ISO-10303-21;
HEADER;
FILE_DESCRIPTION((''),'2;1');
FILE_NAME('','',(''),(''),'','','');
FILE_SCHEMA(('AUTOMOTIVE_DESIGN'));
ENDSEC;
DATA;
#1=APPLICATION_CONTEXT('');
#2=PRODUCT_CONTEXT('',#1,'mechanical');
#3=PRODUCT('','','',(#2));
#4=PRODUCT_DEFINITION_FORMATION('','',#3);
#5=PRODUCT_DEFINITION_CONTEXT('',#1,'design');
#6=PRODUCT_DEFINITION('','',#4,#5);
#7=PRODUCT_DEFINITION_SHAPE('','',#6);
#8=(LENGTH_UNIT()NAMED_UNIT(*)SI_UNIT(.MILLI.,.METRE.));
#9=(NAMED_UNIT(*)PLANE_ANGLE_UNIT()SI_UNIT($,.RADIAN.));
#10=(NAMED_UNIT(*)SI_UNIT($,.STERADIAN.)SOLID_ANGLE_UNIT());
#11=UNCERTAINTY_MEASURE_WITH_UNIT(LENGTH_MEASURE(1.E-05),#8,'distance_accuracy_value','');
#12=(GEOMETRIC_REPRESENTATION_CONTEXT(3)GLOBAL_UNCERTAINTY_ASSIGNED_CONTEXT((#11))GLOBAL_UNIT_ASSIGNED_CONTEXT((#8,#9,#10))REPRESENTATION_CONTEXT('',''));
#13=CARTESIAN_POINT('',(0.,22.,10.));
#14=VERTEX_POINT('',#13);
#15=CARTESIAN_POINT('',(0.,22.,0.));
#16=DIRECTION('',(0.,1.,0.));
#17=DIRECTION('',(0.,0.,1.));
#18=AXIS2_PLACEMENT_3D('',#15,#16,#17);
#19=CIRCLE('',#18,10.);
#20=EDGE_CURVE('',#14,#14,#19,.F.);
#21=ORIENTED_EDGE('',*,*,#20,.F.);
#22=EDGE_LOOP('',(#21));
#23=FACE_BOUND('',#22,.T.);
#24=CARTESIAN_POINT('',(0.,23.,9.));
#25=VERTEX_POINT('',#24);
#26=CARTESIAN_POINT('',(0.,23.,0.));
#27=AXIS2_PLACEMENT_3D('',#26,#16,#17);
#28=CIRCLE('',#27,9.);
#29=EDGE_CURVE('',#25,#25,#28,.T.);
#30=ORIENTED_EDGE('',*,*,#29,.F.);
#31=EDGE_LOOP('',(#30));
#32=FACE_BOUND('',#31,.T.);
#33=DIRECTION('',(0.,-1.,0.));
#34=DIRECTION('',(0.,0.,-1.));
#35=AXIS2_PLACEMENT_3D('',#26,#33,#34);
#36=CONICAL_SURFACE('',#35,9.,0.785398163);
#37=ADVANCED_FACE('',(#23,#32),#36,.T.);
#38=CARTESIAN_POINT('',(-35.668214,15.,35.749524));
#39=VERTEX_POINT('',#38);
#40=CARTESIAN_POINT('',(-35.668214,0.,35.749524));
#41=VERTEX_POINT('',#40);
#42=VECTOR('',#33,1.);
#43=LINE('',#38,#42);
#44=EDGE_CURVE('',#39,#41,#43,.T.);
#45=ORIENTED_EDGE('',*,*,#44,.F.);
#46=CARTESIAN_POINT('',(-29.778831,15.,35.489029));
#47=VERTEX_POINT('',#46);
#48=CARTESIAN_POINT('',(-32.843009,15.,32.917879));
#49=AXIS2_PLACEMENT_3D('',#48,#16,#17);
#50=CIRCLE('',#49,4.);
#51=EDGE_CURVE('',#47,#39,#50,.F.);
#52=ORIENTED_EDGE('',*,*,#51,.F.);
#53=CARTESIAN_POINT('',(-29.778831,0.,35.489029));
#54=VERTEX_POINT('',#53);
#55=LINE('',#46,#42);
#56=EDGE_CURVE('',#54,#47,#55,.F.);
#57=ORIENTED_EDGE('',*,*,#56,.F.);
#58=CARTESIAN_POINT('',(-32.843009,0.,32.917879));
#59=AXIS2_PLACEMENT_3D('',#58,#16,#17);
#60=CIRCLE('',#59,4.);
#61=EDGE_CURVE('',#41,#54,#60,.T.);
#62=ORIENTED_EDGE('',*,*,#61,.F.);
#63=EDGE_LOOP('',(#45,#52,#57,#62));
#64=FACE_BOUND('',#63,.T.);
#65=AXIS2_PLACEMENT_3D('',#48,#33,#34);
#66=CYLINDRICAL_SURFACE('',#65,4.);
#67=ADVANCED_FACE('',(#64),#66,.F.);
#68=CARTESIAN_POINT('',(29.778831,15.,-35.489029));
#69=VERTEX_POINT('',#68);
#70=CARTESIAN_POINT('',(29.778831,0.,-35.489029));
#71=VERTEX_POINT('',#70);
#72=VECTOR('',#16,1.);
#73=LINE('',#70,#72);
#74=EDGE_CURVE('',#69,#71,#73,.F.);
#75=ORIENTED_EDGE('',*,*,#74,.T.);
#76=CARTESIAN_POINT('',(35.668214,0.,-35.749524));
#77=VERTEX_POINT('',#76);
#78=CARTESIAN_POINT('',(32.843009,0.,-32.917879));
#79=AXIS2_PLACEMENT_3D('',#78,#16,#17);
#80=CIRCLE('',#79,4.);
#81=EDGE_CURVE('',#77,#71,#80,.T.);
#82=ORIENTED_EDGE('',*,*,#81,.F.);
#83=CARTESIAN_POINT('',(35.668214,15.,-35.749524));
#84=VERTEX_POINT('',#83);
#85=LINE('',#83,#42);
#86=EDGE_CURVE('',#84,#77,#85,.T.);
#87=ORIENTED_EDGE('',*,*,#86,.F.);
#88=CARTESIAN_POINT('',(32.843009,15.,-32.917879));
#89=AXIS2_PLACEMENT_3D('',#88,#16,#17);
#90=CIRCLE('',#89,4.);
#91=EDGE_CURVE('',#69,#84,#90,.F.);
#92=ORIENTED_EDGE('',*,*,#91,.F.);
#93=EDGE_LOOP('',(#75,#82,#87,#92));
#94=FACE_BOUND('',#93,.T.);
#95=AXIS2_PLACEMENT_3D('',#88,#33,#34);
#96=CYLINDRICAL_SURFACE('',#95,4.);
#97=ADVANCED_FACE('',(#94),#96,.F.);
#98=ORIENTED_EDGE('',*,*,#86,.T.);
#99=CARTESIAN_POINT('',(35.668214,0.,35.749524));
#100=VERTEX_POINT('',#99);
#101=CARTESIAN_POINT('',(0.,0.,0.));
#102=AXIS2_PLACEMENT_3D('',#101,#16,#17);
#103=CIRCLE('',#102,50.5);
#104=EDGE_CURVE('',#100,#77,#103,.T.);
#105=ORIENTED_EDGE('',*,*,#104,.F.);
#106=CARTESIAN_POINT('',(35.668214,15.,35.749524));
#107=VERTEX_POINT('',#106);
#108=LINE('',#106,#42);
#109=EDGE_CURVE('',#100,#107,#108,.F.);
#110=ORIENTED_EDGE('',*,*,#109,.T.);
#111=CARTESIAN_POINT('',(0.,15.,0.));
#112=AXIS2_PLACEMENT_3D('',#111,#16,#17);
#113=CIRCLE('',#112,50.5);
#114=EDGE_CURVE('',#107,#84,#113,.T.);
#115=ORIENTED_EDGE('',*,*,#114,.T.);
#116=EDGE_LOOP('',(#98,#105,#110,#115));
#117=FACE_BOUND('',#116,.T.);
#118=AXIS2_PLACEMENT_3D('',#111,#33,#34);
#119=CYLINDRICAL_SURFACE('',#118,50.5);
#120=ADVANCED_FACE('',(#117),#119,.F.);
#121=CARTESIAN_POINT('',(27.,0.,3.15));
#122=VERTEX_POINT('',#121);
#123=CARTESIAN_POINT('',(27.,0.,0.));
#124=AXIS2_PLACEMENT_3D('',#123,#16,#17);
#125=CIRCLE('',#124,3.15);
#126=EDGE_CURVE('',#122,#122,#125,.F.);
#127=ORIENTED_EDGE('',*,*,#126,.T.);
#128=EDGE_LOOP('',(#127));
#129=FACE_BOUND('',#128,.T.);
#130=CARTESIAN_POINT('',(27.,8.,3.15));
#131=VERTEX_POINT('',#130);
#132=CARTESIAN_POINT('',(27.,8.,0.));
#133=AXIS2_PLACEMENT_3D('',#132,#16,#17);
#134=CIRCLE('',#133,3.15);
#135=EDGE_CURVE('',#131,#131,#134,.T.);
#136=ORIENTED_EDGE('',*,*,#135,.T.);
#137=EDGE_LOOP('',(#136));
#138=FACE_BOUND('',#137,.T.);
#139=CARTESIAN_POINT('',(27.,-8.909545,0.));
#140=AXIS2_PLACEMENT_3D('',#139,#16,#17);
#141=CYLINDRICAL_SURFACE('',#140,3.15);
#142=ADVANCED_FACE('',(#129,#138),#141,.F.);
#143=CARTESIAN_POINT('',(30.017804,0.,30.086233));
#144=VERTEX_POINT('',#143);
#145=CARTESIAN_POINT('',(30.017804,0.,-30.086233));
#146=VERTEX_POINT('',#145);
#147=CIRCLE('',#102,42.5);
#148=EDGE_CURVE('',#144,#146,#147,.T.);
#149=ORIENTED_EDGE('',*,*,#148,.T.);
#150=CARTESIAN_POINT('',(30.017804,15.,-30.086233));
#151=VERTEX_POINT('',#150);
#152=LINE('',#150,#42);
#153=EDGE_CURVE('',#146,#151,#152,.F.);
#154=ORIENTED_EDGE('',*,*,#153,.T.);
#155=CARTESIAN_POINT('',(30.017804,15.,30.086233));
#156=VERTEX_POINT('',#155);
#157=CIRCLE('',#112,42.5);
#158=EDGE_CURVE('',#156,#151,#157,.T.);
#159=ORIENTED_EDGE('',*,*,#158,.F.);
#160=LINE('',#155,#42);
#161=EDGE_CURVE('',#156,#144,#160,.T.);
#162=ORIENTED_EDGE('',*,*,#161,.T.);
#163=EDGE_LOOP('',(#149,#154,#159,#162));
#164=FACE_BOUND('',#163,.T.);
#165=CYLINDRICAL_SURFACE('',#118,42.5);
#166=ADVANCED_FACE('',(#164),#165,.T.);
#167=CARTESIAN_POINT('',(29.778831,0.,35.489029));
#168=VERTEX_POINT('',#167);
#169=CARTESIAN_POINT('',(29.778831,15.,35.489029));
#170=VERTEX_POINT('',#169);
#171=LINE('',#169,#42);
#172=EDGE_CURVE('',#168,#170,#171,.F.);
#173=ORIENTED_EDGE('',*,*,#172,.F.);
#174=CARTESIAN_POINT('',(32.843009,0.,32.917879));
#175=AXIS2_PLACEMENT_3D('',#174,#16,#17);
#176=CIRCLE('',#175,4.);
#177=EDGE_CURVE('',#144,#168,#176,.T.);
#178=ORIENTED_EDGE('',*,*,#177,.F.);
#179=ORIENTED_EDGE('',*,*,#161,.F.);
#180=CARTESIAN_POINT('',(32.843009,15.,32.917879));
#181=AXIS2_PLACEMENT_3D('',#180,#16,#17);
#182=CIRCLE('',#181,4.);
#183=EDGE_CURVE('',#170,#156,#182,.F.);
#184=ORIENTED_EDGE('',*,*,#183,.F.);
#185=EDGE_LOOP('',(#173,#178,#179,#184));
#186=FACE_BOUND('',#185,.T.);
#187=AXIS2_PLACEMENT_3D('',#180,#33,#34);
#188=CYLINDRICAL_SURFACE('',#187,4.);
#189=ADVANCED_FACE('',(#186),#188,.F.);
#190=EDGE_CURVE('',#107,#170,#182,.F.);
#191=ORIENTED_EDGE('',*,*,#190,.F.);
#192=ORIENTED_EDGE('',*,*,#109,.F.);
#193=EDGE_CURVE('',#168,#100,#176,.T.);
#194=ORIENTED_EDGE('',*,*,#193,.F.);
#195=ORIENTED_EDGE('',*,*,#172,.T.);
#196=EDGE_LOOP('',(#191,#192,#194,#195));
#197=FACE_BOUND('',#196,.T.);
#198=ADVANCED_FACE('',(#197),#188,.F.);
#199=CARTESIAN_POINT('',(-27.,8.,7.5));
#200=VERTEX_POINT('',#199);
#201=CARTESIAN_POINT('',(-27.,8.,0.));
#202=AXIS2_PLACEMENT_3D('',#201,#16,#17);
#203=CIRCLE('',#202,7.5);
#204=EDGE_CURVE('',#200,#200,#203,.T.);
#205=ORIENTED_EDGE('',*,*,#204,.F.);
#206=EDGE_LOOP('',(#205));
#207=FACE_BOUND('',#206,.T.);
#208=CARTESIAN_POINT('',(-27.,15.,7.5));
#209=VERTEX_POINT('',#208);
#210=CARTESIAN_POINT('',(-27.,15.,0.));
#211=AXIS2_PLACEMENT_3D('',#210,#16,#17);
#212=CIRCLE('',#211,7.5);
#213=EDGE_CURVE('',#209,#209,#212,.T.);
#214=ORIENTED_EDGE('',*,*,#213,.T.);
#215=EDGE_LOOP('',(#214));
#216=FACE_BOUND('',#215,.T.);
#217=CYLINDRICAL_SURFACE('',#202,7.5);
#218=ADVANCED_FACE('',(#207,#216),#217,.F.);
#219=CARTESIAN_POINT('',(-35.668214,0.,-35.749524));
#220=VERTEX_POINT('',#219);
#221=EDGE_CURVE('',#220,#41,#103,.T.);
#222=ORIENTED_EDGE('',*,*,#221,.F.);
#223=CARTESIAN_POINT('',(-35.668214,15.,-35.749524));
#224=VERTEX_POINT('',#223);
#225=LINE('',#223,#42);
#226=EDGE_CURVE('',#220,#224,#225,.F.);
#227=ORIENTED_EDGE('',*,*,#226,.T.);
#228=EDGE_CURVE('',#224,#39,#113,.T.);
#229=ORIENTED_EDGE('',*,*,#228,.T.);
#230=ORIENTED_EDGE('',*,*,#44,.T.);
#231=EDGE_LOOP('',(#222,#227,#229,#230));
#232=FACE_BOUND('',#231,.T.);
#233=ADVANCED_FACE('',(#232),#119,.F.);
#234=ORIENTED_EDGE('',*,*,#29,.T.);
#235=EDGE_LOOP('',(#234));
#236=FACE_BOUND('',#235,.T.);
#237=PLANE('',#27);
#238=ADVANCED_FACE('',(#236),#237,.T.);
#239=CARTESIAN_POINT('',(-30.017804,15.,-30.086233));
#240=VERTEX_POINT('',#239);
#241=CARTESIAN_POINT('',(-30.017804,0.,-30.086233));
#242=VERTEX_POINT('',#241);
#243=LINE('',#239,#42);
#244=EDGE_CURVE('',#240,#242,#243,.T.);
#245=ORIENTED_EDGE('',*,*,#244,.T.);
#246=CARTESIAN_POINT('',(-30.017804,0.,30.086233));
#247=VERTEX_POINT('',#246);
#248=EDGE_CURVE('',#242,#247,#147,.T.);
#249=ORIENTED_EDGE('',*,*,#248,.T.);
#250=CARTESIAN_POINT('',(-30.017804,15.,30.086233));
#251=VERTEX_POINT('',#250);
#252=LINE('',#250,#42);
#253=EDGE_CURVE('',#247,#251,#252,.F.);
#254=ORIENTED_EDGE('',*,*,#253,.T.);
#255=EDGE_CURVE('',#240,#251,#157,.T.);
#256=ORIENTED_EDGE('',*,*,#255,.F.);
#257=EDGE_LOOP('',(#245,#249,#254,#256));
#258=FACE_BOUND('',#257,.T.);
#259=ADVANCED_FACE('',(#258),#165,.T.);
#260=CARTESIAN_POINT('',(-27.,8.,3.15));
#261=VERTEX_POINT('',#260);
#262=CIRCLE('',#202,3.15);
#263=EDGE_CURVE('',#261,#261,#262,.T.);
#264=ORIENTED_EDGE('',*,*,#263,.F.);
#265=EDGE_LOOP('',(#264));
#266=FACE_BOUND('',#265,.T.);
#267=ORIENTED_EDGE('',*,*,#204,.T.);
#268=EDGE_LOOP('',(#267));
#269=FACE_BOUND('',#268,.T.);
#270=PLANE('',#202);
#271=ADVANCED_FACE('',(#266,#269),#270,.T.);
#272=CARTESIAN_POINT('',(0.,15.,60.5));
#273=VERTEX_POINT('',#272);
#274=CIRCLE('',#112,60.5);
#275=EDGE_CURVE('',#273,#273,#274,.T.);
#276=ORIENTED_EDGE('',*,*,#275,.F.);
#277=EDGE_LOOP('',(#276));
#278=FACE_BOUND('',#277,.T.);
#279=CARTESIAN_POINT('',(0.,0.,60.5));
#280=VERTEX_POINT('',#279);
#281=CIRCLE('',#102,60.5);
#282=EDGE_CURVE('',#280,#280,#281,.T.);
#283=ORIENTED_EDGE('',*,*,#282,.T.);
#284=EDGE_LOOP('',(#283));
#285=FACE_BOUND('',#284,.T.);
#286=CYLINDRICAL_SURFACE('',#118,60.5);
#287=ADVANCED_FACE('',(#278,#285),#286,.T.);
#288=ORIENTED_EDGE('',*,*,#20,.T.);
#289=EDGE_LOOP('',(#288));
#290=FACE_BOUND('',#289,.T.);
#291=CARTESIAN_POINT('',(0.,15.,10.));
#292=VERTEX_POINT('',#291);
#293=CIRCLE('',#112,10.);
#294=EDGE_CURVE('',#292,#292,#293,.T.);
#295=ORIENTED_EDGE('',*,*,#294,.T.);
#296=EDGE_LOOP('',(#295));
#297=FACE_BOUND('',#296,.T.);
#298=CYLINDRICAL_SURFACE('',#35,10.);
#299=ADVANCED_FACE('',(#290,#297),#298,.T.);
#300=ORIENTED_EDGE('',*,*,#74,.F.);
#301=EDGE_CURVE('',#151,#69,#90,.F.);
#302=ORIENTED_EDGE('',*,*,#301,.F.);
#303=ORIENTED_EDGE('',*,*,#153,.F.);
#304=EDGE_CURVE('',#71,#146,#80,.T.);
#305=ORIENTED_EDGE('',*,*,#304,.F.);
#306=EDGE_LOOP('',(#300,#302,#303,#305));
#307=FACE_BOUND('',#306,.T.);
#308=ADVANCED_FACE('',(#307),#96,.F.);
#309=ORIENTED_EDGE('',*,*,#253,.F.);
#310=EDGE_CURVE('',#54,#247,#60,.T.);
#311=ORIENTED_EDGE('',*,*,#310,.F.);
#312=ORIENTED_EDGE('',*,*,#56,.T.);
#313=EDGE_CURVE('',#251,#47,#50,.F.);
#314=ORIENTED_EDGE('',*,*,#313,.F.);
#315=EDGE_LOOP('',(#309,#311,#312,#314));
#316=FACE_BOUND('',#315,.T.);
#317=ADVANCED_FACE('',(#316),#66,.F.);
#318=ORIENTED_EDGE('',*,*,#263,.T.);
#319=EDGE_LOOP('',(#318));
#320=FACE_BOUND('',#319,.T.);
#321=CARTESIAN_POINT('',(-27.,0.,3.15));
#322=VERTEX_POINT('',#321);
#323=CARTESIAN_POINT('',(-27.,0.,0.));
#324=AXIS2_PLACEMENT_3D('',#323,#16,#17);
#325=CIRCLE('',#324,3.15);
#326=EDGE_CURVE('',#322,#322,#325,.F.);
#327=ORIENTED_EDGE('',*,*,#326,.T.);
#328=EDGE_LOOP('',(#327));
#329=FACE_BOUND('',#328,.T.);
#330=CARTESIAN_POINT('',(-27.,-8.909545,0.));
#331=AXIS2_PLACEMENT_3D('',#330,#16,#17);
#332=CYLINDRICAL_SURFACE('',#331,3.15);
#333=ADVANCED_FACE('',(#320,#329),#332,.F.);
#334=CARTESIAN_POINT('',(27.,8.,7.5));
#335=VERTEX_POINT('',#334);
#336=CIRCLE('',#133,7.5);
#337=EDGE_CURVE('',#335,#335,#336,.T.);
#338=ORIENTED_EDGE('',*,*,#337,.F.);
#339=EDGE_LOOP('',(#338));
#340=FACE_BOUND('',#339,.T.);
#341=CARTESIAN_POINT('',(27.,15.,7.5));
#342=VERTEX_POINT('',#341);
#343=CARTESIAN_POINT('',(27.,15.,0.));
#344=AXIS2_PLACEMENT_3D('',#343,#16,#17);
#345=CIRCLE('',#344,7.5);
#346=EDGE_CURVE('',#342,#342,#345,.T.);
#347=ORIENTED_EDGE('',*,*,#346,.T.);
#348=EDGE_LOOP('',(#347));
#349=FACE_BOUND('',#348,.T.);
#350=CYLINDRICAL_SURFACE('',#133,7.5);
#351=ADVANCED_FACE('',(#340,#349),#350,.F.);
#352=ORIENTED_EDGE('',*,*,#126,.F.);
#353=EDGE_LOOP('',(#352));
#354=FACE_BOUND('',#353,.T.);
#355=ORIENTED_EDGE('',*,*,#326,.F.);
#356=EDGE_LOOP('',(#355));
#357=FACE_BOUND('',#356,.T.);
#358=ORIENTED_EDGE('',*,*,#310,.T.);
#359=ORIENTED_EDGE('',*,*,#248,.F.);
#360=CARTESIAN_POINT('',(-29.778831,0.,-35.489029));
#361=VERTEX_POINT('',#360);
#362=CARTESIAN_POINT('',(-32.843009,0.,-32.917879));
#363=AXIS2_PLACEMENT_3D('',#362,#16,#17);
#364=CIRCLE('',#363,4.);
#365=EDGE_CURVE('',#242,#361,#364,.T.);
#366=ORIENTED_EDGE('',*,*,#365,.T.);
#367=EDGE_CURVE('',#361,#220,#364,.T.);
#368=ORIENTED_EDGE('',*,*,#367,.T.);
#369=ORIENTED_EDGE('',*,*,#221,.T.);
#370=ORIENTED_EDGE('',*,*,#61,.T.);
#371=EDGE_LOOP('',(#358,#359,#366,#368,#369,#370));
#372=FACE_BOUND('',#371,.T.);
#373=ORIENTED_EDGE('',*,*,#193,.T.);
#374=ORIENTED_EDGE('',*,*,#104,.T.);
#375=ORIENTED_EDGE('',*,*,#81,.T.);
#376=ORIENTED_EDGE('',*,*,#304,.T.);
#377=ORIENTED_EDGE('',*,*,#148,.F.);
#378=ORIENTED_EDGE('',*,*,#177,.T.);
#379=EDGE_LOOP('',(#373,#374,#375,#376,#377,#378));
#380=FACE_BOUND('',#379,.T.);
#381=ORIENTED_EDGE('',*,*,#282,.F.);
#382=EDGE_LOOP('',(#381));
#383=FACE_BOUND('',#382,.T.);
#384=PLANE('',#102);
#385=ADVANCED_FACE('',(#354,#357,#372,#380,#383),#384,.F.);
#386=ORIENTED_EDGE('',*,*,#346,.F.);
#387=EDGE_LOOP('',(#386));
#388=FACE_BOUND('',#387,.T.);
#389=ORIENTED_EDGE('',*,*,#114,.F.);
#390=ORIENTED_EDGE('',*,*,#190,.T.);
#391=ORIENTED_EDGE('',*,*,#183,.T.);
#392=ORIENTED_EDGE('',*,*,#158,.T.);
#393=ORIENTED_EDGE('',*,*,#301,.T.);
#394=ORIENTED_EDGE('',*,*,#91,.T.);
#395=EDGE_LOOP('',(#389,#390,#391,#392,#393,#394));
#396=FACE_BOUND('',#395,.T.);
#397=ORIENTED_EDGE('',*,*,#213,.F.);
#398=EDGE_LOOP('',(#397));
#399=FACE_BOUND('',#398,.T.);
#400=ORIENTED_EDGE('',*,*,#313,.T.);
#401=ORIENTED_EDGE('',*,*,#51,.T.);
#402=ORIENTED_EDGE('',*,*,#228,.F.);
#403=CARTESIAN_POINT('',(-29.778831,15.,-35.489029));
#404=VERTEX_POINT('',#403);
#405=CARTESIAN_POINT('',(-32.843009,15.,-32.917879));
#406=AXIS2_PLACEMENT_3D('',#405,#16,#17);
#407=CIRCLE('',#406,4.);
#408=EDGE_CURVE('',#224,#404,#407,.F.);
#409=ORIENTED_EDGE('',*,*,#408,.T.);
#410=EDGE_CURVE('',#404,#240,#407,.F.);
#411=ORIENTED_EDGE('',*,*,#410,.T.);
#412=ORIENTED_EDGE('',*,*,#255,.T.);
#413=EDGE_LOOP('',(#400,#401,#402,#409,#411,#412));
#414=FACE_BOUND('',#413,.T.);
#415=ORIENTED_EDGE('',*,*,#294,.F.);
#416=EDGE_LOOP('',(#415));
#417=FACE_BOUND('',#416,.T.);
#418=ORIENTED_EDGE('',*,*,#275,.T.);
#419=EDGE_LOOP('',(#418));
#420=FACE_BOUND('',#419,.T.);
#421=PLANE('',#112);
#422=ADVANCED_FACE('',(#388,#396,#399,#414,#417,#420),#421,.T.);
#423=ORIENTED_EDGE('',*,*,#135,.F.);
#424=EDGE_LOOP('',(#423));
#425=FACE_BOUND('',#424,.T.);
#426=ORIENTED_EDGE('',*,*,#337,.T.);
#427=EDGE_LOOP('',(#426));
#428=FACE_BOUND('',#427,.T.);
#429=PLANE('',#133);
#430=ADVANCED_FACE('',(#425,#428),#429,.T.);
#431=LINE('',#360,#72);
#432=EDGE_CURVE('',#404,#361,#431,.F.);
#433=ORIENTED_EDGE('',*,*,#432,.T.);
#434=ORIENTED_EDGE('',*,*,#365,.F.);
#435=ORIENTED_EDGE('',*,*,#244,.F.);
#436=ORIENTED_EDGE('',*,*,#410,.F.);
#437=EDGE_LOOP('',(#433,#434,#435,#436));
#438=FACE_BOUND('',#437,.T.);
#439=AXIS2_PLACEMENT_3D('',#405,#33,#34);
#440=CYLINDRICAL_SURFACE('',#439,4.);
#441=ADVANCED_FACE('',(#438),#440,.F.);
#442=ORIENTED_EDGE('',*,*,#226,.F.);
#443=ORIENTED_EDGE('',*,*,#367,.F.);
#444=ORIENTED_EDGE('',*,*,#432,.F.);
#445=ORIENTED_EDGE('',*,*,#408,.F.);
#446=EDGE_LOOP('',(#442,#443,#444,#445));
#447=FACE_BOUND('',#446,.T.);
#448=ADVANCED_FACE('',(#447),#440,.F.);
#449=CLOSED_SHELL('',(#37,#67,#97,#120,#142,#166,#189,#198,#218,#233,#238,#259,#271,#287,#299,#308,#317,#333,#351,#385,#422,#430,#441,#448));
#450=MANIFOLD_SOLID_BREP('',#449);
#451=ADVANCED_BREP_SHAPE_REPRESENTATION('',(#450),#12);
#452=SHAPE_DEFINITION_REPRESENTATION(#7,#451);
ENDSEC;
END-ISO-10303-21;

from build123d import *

# Parameters (mm, degrees)
SKETCH1_R           = 60.5
SKETCH1_R_2         = 50.5
SKETCH1_R_3         = 42.5
BOSS_EXTRUDE1_DEPTH = 15
SKETCH2_R           = 7.5
CUT_EXTRUDE1_DEPTH  = 7
SKETCH3_R           = 3.15
CUT_EXTRUDE2_DEPTH  = 15
FILLET1_R           = 4
SKETCH4_R           = 10
BOSS_EXTRUDE2_DEPTH = 8
CHAMFER1_SIZE       = 1


with BuildPart() as part:
    # Sketch1 → Boss-Extrude1 (new body)
    # profile 1 of 4: a face of its own
    with BuildSketch(Plane(origin=(0, 0, 0), x_dir=(1, 0, 0), z_dir=(0, 1, 0))):
        with Locations(Location((0, 0, 0), (0, 0, 270))):
            Circle(SKETCH1_R)
        Circle(SKETCH1_R_2, mode=Mode.SUBTRACT)
    # profile 2 of 4: a face of its own
    with BuildSketch(Plane(origin=(0, 0, 0), x_dir=(1, 0, 0), z_dir=(0, 1, 0))):
        with BuildLine():
            ThreePointArc((-27.318473412, 32.556888833), (0, 42.5), (27.318473412, 32.556888833))
            Line((27.318473412, 32.556888833), (32.460774289, 38.685244378))
            ThreePointArc((32.460774289, 38.685244378), (0, 50.5), (-32.460774289, 38.685244378))
            Line((-32.460774289, 38.685244378), (-27.318473412, 32.556888833))
        make_face()
    # profile 3 of 4: a face of its own
    with BuildSketch(Plane(origin=(0, 0, 0), x_dir=(1, 0, 0), z_dir=(0, 1, 0))):
        Circle(SKETCH1_R_3)
    # profile 4 of 4: a face of its own
    with BuildSketch(Plane(origin=(0, 0, 0), x_dir=(1, 0, 0), z_dir=(0, 1, 0))):
        with BuildLine():
            Line((32.460774289, -38.685244378), (27.318473412, -32.556888833))
            ThreePointArc((27.318473412, -32.556888833), (0, -42.5), (-27.318473412, -32.556888833))
            Line((-27.318473412, -32.556888833), (-32.460774289, -38.685244378))
            ThreePointArc((-32.460774289, -38.685244378), (0, -50.5), (32.460774289, -38.685244378))
        make_face()
    extrude(amount=BOSS_EXTRUDE1_DEPTH)

    # Sketch2 → Cut-Extrude1 (cut)
    with BuildSketch(Plane(origin=(0, 15, 0), x_dir=(1, 0, 0), z_dir=(0, 1, 0))):
        with Locations(Location((-27, 0, 0), (0, 0, 270))):
            Circle(SKETCH2_R)
        with Locations(Location((27, 0, 0), (0, 0, 270))):
            Circle(SKETCH2_R)
    extrude(amount=-CUT_EXTRUDE1_DEPTH, mode=Mode.SUBTRACT)

    # Sketch3 → Cut-Extrude2 (cut)
    with BuildSketch(Plane(origin=(0, 15, 0), x_dir=(1, 0, 0), z_dir=(0, 1, 0))):
        with Locations(Location((-27, 0, 0), (0, 0, 270))):
            Circle(SKETCH3_R)
        with Locations(Location((27, 0, 0), (0, 0, 270))):
            Circle(SKETCH3_R)
    extrude(amount=-CUT_EXTRUDE2_DEPTH, mode=Mode.SUBTRACT)

    # Fillet1
    fillet1_edges = [part.edges().sort_by_distance(p)[0] for p in [
        (32.460774289, 7.5, 38.685244378),
        (27.318473412, 7.5, 32.556888833),
        (-27.318473412, 7.5, 32.556888833),
        (-32.460774289, 7.5, 38.685244378),
        (32.460774289, 7.5, -38.685244378),
        (27.318473412, 7.5, -32.556888833),
        (-27.318473412, 7.5, -32.556888833),
        (-32.460774289, 7.5, -38.685244378),
    ]]
    fillet(fillet1_edges, radius=FILLET1_R - 0.0001)  # a hair under: the kernel refuses the full size

    # Sketch4 → Boss-Extrude2 (add)
    with BuildSketch(Plane(origin=(0, 15, 0), x_dir=(1, 0, 0), z_dir=(0, 1, 0))):
        with Locations(Location((0, 0, 0), (0, 0, 270))):
            Circle(SKETCH4_R)
    extrude(amount=BOSS_EXTRUDE2_DEPTH)

    # Chamfer1
    chamfer1_edges = [part.edges().sort_by_distance(p)[0] for p in [
        (0, 23, -10),
    ]]
    chamfer(chamfer1_edges, length=CHAMFER1_SIZE)


solid = part.part
